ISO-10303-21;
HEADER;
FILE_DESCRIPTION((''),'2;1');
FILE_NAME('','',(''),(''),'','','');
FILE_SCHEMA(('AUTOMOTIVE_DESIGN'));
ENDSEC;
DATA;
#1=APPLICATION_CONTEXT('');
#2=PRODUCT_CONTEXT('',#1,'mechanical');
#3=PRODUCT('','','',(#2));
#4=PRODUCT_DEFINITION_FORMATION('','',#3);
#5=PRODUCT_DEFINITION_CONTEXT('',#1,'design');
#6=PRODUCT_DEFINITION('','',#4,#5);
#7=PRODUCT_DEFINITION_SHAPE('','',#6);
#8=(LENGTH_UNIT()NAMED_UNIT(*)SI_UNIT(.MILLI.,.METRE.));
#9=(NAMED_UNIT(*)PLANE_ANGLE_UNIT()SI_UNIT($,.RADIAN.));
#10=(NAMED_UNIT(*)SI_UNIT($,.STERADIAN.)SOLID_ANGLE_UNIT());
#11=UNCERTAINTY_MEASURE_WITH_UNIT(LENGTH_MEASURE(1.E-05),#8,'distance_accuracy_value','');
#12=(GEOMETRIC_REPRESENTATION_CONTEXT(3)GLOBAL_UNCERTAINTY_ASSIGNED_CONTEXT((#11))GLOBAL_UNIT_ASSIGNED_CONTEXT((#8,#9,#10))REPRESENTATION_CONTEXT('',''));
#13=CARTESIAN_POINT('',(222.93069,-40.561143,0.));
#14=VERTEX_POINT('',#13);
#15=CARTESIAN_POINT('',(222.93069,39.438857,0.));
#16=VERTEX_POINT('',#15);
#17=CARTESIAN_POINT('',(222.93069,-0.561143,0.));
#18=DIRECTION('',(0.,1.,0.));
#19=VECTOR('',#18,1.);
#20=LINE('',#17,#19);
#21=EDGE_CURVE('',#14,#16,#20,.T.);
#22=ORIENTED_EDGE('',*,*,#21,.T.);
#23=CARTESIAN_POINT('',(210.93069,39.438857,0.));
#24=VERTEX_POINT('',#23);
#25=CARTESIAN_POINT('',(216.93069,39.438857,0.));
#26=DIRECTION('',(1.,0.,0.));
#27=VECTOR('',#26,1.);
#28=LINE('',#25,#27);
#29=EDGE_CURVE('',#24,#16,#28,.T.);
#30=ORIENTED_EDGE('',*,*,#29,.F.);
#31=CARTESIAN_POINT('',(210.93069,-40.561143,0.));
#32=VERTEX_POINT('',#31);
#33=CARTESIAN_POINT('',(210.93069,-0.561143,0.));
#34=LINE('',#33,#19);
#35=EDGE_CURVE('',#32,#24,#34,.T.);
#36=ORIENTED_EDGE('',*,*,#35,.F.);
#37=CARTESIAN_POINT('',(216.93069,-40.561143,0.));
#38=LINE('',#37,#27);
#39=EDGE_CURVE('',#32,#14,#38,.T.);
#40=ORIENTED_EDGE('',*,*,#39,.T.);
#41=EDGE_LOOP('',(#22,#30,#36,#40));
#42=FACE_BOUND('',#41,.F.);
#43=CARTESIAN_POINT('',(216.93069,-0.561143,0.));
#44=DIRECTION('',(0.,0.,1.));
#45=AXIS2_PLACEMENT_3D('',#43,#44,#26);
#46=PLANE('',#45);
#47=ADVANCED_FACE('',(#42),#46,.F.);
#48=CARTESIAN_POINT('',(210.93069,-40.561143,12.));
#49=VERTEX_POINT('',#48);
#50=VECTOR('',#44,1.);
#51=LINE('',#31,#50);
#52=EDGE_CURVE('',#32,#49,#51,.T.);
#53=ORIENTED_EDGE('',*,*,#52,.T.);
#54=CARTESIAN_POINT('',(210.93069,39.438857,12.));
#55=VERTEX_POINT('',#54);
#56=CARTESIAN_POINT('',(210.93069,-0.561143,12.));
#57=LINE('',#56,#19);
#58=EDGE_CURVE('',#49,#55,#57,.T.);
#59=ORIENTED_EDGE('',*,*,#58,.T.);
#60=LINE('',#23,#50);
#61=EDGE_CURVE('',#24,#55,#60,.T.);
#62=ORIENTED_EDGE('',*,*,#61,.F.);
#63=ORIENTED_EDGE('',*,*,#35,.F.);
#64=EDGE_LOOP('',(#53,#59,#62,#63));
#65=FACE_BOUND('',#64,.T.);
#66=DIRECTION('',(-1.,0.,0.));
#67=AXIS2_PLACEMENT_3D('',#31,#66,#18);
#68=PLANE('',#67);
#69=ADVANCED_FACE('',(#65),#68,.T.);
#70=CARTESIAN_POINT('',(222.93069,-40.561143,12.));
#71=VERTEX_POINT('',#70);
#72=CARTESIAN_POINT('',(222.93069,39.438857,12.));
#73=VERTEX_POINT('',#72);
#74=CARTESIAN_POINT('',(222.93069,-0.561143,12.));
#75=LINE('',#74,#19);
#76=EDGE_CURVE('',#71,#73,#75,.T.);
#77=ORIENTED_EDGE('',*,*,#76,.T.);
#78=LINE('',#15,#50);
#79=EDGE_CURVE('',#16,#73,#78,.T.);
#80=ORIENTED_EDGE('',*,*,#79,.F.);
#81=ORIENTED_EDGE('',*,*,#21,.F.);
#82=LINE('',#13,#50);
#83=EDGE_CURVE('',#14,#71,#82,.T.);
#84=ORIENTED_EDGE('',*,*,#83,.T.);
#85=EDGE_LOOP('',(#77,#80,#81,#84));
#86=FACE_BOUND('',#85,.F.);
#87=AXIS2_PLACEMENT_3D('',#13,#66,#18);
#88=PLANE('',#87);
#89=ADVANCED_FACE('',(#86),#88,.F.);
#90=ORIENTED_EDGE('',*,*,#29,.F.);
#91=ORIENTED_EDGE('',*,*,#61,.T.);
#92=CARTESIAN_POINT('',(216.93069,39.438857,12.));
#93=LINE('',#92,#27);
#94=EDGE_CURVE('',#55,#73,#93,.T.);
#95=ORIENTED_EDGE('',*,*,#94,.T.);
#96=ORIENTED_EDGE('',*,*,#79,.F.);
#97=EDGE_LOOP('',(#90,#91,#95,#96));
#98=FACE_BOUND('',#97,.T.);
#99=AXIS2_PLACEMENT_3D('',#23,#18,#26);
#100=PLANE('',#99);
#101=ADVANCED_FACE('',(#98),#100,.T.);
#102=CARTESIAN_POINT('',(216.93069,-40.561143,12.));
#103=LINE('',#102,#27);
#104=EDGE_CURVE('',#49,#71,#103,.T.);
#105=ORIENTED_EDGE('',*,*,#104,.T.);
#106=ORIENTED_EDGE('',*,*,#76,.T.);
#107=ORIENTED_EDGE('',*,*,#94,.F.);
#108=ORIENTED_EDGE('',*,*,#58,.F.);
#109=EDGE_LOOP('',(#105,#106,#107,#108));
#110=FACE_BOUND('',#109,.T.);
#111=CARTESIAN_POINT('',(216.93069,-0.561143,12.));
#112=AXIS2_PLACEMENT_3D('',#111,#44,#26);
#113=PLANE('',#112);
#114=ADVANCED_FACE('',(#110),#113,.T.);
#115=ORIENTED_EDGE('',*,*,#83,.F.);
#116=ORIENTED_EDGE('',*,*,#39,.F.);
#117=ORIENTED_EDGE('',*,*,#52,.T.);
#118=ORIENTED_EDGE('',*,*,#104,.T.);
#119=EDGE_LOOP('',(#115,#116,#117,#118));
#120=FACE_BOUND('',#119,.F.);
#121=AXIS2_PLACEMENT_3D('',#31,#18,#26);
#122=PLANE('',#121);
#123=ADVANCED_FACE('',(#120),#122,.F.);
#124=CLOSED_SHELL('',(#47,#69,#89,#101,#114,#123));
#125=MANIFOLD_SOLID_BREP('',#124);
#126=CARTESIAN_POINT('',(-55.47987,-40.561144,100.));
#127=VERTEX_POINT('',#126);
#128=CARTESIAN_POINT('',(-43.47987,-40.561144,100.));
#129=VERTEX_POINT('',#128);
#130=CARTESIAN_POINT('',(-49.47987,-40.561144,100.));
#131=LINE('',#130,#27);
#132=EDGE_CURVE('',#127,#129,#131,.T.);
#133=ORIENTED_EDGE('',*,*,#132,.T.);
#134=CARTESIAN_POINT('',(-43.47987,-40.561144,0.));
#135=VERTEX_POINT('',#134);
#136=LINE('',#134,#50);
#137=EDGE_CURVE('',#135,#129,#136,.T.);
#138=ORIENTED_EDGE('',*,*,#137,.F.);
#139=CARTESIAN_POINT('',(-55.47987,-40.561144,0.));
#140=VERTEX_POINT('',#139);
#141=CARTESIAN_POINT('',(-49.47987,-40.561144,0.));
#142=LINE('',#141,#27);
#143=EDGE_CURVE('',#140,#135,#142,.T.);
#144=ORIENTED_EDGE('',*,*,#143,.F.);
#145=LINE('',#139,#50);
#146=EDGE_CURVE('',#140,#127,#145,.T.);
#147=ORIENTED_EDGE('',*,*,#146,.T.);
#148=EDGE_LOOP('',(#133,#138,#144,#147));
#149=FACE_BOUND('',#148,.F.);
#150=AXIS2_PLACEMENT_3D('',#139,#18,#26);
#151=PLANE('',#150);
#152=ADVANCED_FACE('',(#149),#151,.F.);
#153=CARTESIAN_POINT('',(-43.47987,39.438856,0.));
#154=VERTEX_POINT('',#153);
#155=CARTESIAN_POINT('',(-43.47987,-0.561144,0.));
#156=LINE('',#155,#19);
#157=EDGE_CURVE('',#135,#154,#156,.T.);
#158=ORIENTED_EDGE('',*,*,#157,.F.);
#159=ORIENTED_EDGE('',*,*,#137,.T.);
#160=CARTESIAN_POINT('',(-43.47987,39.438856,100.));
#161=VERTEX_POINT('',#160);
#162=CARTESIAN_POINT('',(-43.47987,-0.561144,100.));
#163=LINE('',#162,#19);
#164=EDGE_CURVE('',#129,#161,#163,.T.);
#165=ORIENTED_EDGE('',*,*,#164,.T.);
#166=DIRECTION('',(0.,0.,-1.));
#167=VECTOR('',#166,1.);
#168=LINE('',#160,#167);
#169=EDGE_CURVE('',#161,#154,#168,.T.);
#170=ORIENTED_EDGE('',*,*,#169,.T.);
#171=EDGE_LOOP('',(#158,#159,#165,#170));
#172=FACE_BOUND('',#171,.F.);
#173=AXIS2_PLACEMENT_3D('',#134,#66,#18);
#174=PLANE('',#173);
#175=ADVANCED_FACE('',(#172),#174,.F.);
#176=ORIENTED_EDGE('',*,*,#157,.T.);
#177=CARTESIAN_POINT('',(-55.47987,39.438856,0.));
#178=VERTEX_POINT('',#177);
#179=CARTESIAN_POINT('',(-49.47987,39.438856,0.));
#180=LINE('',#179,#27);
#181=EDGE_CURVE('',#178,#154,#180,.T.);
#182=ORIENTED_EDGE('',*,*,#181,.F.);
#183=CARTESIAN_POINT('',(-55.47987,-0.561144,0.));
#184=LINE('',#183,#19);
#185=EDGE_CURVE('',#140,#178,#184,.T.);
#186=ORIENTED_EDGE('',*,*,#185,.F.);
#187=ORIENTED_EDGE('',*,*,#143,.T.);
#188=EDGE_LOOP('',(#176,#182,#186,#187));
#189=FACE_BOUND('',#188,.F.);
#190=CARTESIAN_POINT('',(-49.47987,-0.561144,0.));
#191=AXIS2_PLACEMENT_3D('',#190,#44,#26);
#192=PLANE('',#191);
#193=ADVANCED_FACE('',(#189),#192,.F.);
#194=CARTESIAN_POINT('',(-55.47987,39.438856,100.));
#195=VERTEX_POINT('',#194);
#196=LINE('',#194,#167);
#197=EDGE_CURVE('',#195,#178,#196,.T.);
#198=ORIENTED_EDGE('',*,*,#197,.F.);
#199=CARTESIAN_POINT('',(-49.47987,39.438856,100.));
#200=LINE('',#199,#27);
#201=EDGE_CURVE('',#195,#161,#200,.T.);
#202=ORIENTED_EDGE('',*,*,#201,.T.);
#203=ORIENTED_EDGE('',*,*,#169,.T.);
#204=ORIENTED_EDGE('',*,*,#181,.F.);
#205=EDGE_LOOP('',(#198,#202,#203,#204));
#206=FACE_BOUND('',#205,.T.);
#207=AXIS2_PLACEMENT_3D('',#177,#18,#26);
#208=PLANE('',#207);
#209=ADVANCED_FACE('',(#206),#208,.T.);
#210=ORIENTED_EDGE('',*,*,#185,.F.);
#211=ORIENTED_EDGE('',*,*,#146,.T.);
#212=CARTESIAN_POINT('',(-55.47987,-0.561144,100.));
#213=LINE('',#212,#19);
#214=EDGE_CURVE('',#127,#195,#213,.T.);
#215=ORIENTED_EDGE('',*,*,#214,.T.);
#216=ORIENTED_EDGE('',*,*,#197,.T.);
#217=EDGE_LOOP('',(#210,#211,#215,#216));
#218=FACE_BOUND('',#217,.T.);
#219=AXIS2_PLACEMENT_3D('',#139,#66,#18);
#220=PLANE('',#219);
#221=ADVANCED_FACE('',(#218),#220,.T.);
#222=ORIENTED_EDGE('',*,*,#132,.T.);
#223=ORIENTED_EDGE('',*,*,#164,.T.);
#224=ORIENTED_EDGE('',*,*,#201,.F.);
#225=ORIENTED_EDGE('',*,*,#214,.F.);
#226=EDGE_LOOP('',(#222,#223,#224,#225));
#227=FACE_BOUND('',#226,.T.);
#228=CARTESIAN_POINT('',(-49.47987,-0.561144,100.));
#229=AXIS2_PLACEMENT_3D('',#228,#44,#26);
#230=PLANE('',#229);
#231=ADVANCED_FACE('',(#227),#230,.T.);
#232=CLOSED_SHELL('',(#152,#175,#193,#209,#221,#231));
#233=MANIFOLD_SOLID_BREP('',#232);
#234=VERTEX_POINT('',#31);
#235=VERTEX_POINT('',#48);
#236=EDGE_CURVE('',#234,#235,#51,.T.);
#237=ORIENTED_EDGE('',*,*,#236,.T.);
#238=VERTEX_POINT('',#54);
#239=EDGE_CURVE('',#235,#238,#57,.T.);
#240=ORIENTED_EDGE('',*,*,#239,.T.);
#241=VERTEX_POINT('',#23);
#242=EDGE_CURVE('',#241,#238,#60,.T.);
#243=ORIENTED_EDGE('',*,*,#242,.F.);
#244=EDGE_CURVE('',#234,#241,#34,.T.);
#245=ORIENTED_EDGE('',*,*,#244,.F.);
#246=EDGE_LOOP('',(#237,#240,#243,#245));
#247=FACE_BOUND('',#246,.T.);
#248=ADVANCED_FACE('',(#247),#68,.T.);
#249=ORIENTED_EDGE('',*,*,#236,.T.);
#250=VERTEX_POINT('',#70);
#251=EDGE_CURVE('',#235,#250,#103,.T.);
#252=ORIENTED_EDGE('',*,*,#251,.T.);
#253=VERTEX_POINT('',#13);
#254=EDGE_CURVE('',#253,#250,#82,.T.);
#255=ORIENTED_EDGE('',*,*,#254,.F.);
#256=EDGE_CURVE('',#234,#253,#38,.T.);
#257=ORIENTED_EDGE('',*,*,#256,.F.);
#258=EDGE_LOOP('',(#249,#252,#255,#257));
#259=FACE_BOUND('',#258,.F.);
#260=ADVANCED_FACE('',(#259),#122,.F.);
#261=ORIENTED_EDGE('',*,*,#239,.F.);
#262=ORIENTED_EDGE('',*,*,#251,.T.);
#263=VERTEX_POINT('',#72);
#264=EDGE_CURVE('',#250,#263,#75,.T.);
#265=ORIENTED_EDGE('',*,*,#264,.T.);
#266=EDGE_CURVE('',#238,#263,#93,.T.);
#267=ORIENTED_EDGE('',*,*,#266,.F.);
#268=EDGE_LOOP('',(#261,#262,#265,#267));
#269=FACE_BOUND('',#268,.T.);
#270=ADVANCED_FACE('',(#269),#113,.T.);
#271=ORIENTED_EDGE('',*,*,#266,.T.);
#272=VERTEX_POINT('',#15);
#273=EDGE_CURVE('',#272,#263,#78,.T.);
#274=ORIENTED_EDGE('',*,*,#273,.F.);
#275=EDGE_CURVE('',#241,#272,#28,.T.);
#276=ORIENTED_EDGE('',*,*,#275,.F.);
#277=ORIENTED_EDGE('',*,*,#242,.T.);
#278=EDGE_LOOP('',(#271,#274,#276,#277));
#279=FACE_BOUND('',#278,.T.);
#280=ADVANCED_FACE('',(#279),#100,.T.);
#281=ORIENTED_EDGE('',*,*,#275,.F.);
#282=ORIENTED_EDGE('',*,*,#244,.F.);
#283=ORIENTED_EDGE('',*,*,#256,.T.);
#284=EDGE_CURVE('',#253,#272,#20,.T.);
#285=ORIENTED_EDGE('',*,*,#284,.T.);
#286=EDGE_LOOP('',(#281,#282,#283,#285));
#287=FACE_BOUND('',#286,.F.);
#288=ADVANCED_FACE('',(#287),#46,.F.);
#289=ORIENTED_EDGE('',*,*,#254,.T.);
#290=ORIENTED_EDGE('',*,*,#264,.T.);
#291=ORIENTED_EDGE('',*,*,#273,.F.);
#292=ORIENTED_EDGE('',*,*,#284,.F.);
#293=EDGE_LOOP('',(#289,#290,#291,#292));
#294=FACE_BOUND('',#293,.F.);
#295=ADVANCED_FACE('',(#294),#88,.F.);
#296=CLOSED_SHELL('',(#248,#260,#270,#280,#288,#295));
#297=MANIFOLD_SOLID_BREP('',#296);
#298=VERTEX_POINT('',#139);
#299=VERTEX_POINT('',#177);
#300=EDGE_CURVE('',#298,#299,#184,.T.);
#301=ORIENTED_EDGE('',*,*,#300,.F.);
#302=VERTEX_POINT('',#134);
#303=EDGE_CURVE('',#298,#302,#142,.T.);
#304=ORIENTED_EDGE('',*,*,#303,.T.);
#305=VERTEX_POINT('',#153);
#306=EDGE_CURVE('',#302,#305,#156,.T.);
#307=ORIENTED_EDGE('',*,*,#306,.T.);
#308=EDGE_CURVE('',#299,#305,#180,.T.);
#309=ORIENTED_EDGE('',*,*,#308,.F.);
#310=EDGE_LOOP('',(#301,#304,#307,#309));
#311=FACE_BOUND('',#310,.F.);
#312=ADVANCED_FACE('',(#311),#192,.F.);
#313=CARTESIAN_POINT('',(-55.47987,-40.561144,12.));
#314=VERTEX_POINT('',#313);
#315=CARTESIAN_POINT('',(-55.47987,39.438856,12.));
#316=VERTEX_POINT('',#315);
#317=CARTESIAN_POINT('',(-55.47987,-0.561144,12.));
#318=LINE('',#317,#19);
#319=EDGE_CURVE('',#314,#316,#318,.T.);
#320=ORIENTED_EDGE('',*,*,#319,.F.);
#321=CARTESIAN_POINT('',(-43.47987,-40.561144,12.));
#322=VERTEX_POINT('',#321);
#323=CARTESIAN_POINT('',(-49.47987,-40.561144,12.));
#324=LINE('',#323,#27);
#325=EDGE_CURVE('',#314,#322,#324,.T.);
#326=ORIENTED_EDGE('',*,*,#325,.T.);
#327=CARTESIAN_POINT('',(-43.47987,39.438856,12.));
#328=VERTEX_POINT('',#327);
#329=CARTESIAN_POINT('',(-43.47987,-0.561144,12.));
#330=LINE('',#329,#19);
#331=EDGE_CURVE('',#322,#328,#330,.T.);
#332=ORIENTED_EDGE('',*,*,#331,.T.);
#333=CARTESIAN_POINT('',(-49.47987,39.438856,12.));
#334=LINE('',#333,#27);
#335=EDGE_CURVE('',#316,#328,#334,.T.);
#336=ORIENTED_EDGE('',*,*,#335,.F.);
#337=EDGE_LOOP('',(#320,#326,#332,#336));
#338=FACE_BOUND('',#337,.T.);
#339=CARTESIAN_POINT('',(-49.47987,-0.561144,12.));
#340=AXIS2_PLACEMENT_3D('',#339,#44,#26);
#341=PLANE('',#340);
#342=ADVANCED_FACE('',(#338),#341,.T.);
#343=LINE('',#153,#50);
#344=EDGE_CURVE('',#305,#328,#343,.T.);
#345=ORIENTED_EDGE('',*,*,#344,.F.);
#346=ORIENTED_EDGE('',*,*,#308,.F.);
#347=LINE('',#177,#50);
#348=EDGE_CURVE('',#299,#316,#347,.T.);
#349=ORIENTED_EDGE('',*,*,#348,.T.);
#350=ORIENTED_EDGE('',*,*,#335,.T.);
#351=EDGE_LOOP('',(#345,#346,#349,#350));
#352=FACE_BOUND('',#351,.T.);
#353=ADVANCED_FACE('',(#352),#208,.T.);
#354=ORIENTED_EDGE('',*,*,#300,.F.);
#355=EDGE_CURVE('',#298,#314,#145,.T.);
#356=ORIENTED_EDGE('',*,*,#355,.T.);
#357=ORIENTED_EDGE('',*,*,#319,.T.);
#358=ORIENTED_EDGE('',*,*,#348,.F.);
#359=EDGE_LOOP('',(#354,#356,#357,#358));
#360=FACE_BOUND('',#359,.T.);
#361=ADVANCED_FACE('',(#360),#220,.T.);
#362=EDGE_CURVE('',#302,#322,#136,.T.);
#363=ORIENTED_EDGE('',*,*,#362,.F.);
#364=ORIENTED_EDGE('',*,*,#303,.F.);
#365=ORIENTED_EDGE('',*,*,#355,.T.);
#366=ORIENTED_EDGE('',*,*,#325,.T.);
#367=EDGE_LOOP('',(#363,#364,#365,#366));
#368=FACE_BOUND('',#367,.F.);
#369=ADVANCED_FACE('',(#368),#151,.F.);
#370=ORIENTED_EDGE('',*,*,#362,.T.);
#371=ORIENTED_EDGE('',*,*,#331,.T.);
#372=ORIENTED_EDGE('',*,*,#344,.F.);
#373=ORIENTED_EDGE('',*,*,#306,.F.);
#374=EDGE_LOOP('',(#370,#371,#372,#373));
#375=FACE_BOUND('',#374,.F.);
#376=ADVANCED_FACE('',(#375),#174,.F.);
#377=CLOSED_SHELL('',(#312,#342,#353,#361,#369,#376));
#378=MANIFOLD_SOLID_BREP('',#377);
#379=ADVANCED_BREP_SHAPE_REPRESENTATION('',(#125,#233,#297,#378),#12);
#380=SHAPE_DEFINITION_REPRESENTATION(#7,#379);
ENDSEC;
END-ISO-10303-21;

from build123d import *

# Parameters (mm, degrees)
F0_W     = 12
F0_H     = 80
F1_DEPTH = 100
F2_DEPTH = 12
F3_DEPTH = 12


# Not quite as in the source:
# - a feature names something its author has since deleted; it is built from what else it names


with BuildPart() as f1:
    # F0 (on Top) → F1 (new body)
    with BuildSketch(Plane.XY):
        with Locations((-49.4798701257, -0.5611437102)):
            Rectangle(F0_W, F0_H)
    extrude(amount=F1_DEPTH)

    # F0 (on Top) → F2 (join)
    with BuildSketch(Plane.XY):
        with Locations((-49.4798701257, -0.5611437102)):
            Rectangle(F0_W, F0_H)
    extrude(amount=F2_DEPTH)


with BuildPart() as f2:
    # F0 (on Top) → F2, piece 2 (new body)
    with BuildSketch(Plane.XY):
        with Locations((216.9306901693, -0.5611433089)):
            Rectangle(F0_W, F0_H)
    extrude(amount=F2_DEPTH)


with BuildPart() as f3:
    # F0 (on Top) → F3 (new body)
    with BuildSketch(Plane.XY):
        with Locations((-49.4798701257, -0.5611437102)):
            Rectangle(F0_W, F0_H)
    extrude(amount=F3_DEPTH)


with BuildPart() as f3b:
    # F0 (on Top) → F3, piece 2 (new body)
    with BuildSketch(Plane.XY):
        with Locations((216.9306901693, -0.5611433089)):
            Rectangle(F0_W, F0_H)
    extrude(amount=F3_DEPTH)


solid = Compound([f1.part, f2.part, f3.part, f3b.part])
